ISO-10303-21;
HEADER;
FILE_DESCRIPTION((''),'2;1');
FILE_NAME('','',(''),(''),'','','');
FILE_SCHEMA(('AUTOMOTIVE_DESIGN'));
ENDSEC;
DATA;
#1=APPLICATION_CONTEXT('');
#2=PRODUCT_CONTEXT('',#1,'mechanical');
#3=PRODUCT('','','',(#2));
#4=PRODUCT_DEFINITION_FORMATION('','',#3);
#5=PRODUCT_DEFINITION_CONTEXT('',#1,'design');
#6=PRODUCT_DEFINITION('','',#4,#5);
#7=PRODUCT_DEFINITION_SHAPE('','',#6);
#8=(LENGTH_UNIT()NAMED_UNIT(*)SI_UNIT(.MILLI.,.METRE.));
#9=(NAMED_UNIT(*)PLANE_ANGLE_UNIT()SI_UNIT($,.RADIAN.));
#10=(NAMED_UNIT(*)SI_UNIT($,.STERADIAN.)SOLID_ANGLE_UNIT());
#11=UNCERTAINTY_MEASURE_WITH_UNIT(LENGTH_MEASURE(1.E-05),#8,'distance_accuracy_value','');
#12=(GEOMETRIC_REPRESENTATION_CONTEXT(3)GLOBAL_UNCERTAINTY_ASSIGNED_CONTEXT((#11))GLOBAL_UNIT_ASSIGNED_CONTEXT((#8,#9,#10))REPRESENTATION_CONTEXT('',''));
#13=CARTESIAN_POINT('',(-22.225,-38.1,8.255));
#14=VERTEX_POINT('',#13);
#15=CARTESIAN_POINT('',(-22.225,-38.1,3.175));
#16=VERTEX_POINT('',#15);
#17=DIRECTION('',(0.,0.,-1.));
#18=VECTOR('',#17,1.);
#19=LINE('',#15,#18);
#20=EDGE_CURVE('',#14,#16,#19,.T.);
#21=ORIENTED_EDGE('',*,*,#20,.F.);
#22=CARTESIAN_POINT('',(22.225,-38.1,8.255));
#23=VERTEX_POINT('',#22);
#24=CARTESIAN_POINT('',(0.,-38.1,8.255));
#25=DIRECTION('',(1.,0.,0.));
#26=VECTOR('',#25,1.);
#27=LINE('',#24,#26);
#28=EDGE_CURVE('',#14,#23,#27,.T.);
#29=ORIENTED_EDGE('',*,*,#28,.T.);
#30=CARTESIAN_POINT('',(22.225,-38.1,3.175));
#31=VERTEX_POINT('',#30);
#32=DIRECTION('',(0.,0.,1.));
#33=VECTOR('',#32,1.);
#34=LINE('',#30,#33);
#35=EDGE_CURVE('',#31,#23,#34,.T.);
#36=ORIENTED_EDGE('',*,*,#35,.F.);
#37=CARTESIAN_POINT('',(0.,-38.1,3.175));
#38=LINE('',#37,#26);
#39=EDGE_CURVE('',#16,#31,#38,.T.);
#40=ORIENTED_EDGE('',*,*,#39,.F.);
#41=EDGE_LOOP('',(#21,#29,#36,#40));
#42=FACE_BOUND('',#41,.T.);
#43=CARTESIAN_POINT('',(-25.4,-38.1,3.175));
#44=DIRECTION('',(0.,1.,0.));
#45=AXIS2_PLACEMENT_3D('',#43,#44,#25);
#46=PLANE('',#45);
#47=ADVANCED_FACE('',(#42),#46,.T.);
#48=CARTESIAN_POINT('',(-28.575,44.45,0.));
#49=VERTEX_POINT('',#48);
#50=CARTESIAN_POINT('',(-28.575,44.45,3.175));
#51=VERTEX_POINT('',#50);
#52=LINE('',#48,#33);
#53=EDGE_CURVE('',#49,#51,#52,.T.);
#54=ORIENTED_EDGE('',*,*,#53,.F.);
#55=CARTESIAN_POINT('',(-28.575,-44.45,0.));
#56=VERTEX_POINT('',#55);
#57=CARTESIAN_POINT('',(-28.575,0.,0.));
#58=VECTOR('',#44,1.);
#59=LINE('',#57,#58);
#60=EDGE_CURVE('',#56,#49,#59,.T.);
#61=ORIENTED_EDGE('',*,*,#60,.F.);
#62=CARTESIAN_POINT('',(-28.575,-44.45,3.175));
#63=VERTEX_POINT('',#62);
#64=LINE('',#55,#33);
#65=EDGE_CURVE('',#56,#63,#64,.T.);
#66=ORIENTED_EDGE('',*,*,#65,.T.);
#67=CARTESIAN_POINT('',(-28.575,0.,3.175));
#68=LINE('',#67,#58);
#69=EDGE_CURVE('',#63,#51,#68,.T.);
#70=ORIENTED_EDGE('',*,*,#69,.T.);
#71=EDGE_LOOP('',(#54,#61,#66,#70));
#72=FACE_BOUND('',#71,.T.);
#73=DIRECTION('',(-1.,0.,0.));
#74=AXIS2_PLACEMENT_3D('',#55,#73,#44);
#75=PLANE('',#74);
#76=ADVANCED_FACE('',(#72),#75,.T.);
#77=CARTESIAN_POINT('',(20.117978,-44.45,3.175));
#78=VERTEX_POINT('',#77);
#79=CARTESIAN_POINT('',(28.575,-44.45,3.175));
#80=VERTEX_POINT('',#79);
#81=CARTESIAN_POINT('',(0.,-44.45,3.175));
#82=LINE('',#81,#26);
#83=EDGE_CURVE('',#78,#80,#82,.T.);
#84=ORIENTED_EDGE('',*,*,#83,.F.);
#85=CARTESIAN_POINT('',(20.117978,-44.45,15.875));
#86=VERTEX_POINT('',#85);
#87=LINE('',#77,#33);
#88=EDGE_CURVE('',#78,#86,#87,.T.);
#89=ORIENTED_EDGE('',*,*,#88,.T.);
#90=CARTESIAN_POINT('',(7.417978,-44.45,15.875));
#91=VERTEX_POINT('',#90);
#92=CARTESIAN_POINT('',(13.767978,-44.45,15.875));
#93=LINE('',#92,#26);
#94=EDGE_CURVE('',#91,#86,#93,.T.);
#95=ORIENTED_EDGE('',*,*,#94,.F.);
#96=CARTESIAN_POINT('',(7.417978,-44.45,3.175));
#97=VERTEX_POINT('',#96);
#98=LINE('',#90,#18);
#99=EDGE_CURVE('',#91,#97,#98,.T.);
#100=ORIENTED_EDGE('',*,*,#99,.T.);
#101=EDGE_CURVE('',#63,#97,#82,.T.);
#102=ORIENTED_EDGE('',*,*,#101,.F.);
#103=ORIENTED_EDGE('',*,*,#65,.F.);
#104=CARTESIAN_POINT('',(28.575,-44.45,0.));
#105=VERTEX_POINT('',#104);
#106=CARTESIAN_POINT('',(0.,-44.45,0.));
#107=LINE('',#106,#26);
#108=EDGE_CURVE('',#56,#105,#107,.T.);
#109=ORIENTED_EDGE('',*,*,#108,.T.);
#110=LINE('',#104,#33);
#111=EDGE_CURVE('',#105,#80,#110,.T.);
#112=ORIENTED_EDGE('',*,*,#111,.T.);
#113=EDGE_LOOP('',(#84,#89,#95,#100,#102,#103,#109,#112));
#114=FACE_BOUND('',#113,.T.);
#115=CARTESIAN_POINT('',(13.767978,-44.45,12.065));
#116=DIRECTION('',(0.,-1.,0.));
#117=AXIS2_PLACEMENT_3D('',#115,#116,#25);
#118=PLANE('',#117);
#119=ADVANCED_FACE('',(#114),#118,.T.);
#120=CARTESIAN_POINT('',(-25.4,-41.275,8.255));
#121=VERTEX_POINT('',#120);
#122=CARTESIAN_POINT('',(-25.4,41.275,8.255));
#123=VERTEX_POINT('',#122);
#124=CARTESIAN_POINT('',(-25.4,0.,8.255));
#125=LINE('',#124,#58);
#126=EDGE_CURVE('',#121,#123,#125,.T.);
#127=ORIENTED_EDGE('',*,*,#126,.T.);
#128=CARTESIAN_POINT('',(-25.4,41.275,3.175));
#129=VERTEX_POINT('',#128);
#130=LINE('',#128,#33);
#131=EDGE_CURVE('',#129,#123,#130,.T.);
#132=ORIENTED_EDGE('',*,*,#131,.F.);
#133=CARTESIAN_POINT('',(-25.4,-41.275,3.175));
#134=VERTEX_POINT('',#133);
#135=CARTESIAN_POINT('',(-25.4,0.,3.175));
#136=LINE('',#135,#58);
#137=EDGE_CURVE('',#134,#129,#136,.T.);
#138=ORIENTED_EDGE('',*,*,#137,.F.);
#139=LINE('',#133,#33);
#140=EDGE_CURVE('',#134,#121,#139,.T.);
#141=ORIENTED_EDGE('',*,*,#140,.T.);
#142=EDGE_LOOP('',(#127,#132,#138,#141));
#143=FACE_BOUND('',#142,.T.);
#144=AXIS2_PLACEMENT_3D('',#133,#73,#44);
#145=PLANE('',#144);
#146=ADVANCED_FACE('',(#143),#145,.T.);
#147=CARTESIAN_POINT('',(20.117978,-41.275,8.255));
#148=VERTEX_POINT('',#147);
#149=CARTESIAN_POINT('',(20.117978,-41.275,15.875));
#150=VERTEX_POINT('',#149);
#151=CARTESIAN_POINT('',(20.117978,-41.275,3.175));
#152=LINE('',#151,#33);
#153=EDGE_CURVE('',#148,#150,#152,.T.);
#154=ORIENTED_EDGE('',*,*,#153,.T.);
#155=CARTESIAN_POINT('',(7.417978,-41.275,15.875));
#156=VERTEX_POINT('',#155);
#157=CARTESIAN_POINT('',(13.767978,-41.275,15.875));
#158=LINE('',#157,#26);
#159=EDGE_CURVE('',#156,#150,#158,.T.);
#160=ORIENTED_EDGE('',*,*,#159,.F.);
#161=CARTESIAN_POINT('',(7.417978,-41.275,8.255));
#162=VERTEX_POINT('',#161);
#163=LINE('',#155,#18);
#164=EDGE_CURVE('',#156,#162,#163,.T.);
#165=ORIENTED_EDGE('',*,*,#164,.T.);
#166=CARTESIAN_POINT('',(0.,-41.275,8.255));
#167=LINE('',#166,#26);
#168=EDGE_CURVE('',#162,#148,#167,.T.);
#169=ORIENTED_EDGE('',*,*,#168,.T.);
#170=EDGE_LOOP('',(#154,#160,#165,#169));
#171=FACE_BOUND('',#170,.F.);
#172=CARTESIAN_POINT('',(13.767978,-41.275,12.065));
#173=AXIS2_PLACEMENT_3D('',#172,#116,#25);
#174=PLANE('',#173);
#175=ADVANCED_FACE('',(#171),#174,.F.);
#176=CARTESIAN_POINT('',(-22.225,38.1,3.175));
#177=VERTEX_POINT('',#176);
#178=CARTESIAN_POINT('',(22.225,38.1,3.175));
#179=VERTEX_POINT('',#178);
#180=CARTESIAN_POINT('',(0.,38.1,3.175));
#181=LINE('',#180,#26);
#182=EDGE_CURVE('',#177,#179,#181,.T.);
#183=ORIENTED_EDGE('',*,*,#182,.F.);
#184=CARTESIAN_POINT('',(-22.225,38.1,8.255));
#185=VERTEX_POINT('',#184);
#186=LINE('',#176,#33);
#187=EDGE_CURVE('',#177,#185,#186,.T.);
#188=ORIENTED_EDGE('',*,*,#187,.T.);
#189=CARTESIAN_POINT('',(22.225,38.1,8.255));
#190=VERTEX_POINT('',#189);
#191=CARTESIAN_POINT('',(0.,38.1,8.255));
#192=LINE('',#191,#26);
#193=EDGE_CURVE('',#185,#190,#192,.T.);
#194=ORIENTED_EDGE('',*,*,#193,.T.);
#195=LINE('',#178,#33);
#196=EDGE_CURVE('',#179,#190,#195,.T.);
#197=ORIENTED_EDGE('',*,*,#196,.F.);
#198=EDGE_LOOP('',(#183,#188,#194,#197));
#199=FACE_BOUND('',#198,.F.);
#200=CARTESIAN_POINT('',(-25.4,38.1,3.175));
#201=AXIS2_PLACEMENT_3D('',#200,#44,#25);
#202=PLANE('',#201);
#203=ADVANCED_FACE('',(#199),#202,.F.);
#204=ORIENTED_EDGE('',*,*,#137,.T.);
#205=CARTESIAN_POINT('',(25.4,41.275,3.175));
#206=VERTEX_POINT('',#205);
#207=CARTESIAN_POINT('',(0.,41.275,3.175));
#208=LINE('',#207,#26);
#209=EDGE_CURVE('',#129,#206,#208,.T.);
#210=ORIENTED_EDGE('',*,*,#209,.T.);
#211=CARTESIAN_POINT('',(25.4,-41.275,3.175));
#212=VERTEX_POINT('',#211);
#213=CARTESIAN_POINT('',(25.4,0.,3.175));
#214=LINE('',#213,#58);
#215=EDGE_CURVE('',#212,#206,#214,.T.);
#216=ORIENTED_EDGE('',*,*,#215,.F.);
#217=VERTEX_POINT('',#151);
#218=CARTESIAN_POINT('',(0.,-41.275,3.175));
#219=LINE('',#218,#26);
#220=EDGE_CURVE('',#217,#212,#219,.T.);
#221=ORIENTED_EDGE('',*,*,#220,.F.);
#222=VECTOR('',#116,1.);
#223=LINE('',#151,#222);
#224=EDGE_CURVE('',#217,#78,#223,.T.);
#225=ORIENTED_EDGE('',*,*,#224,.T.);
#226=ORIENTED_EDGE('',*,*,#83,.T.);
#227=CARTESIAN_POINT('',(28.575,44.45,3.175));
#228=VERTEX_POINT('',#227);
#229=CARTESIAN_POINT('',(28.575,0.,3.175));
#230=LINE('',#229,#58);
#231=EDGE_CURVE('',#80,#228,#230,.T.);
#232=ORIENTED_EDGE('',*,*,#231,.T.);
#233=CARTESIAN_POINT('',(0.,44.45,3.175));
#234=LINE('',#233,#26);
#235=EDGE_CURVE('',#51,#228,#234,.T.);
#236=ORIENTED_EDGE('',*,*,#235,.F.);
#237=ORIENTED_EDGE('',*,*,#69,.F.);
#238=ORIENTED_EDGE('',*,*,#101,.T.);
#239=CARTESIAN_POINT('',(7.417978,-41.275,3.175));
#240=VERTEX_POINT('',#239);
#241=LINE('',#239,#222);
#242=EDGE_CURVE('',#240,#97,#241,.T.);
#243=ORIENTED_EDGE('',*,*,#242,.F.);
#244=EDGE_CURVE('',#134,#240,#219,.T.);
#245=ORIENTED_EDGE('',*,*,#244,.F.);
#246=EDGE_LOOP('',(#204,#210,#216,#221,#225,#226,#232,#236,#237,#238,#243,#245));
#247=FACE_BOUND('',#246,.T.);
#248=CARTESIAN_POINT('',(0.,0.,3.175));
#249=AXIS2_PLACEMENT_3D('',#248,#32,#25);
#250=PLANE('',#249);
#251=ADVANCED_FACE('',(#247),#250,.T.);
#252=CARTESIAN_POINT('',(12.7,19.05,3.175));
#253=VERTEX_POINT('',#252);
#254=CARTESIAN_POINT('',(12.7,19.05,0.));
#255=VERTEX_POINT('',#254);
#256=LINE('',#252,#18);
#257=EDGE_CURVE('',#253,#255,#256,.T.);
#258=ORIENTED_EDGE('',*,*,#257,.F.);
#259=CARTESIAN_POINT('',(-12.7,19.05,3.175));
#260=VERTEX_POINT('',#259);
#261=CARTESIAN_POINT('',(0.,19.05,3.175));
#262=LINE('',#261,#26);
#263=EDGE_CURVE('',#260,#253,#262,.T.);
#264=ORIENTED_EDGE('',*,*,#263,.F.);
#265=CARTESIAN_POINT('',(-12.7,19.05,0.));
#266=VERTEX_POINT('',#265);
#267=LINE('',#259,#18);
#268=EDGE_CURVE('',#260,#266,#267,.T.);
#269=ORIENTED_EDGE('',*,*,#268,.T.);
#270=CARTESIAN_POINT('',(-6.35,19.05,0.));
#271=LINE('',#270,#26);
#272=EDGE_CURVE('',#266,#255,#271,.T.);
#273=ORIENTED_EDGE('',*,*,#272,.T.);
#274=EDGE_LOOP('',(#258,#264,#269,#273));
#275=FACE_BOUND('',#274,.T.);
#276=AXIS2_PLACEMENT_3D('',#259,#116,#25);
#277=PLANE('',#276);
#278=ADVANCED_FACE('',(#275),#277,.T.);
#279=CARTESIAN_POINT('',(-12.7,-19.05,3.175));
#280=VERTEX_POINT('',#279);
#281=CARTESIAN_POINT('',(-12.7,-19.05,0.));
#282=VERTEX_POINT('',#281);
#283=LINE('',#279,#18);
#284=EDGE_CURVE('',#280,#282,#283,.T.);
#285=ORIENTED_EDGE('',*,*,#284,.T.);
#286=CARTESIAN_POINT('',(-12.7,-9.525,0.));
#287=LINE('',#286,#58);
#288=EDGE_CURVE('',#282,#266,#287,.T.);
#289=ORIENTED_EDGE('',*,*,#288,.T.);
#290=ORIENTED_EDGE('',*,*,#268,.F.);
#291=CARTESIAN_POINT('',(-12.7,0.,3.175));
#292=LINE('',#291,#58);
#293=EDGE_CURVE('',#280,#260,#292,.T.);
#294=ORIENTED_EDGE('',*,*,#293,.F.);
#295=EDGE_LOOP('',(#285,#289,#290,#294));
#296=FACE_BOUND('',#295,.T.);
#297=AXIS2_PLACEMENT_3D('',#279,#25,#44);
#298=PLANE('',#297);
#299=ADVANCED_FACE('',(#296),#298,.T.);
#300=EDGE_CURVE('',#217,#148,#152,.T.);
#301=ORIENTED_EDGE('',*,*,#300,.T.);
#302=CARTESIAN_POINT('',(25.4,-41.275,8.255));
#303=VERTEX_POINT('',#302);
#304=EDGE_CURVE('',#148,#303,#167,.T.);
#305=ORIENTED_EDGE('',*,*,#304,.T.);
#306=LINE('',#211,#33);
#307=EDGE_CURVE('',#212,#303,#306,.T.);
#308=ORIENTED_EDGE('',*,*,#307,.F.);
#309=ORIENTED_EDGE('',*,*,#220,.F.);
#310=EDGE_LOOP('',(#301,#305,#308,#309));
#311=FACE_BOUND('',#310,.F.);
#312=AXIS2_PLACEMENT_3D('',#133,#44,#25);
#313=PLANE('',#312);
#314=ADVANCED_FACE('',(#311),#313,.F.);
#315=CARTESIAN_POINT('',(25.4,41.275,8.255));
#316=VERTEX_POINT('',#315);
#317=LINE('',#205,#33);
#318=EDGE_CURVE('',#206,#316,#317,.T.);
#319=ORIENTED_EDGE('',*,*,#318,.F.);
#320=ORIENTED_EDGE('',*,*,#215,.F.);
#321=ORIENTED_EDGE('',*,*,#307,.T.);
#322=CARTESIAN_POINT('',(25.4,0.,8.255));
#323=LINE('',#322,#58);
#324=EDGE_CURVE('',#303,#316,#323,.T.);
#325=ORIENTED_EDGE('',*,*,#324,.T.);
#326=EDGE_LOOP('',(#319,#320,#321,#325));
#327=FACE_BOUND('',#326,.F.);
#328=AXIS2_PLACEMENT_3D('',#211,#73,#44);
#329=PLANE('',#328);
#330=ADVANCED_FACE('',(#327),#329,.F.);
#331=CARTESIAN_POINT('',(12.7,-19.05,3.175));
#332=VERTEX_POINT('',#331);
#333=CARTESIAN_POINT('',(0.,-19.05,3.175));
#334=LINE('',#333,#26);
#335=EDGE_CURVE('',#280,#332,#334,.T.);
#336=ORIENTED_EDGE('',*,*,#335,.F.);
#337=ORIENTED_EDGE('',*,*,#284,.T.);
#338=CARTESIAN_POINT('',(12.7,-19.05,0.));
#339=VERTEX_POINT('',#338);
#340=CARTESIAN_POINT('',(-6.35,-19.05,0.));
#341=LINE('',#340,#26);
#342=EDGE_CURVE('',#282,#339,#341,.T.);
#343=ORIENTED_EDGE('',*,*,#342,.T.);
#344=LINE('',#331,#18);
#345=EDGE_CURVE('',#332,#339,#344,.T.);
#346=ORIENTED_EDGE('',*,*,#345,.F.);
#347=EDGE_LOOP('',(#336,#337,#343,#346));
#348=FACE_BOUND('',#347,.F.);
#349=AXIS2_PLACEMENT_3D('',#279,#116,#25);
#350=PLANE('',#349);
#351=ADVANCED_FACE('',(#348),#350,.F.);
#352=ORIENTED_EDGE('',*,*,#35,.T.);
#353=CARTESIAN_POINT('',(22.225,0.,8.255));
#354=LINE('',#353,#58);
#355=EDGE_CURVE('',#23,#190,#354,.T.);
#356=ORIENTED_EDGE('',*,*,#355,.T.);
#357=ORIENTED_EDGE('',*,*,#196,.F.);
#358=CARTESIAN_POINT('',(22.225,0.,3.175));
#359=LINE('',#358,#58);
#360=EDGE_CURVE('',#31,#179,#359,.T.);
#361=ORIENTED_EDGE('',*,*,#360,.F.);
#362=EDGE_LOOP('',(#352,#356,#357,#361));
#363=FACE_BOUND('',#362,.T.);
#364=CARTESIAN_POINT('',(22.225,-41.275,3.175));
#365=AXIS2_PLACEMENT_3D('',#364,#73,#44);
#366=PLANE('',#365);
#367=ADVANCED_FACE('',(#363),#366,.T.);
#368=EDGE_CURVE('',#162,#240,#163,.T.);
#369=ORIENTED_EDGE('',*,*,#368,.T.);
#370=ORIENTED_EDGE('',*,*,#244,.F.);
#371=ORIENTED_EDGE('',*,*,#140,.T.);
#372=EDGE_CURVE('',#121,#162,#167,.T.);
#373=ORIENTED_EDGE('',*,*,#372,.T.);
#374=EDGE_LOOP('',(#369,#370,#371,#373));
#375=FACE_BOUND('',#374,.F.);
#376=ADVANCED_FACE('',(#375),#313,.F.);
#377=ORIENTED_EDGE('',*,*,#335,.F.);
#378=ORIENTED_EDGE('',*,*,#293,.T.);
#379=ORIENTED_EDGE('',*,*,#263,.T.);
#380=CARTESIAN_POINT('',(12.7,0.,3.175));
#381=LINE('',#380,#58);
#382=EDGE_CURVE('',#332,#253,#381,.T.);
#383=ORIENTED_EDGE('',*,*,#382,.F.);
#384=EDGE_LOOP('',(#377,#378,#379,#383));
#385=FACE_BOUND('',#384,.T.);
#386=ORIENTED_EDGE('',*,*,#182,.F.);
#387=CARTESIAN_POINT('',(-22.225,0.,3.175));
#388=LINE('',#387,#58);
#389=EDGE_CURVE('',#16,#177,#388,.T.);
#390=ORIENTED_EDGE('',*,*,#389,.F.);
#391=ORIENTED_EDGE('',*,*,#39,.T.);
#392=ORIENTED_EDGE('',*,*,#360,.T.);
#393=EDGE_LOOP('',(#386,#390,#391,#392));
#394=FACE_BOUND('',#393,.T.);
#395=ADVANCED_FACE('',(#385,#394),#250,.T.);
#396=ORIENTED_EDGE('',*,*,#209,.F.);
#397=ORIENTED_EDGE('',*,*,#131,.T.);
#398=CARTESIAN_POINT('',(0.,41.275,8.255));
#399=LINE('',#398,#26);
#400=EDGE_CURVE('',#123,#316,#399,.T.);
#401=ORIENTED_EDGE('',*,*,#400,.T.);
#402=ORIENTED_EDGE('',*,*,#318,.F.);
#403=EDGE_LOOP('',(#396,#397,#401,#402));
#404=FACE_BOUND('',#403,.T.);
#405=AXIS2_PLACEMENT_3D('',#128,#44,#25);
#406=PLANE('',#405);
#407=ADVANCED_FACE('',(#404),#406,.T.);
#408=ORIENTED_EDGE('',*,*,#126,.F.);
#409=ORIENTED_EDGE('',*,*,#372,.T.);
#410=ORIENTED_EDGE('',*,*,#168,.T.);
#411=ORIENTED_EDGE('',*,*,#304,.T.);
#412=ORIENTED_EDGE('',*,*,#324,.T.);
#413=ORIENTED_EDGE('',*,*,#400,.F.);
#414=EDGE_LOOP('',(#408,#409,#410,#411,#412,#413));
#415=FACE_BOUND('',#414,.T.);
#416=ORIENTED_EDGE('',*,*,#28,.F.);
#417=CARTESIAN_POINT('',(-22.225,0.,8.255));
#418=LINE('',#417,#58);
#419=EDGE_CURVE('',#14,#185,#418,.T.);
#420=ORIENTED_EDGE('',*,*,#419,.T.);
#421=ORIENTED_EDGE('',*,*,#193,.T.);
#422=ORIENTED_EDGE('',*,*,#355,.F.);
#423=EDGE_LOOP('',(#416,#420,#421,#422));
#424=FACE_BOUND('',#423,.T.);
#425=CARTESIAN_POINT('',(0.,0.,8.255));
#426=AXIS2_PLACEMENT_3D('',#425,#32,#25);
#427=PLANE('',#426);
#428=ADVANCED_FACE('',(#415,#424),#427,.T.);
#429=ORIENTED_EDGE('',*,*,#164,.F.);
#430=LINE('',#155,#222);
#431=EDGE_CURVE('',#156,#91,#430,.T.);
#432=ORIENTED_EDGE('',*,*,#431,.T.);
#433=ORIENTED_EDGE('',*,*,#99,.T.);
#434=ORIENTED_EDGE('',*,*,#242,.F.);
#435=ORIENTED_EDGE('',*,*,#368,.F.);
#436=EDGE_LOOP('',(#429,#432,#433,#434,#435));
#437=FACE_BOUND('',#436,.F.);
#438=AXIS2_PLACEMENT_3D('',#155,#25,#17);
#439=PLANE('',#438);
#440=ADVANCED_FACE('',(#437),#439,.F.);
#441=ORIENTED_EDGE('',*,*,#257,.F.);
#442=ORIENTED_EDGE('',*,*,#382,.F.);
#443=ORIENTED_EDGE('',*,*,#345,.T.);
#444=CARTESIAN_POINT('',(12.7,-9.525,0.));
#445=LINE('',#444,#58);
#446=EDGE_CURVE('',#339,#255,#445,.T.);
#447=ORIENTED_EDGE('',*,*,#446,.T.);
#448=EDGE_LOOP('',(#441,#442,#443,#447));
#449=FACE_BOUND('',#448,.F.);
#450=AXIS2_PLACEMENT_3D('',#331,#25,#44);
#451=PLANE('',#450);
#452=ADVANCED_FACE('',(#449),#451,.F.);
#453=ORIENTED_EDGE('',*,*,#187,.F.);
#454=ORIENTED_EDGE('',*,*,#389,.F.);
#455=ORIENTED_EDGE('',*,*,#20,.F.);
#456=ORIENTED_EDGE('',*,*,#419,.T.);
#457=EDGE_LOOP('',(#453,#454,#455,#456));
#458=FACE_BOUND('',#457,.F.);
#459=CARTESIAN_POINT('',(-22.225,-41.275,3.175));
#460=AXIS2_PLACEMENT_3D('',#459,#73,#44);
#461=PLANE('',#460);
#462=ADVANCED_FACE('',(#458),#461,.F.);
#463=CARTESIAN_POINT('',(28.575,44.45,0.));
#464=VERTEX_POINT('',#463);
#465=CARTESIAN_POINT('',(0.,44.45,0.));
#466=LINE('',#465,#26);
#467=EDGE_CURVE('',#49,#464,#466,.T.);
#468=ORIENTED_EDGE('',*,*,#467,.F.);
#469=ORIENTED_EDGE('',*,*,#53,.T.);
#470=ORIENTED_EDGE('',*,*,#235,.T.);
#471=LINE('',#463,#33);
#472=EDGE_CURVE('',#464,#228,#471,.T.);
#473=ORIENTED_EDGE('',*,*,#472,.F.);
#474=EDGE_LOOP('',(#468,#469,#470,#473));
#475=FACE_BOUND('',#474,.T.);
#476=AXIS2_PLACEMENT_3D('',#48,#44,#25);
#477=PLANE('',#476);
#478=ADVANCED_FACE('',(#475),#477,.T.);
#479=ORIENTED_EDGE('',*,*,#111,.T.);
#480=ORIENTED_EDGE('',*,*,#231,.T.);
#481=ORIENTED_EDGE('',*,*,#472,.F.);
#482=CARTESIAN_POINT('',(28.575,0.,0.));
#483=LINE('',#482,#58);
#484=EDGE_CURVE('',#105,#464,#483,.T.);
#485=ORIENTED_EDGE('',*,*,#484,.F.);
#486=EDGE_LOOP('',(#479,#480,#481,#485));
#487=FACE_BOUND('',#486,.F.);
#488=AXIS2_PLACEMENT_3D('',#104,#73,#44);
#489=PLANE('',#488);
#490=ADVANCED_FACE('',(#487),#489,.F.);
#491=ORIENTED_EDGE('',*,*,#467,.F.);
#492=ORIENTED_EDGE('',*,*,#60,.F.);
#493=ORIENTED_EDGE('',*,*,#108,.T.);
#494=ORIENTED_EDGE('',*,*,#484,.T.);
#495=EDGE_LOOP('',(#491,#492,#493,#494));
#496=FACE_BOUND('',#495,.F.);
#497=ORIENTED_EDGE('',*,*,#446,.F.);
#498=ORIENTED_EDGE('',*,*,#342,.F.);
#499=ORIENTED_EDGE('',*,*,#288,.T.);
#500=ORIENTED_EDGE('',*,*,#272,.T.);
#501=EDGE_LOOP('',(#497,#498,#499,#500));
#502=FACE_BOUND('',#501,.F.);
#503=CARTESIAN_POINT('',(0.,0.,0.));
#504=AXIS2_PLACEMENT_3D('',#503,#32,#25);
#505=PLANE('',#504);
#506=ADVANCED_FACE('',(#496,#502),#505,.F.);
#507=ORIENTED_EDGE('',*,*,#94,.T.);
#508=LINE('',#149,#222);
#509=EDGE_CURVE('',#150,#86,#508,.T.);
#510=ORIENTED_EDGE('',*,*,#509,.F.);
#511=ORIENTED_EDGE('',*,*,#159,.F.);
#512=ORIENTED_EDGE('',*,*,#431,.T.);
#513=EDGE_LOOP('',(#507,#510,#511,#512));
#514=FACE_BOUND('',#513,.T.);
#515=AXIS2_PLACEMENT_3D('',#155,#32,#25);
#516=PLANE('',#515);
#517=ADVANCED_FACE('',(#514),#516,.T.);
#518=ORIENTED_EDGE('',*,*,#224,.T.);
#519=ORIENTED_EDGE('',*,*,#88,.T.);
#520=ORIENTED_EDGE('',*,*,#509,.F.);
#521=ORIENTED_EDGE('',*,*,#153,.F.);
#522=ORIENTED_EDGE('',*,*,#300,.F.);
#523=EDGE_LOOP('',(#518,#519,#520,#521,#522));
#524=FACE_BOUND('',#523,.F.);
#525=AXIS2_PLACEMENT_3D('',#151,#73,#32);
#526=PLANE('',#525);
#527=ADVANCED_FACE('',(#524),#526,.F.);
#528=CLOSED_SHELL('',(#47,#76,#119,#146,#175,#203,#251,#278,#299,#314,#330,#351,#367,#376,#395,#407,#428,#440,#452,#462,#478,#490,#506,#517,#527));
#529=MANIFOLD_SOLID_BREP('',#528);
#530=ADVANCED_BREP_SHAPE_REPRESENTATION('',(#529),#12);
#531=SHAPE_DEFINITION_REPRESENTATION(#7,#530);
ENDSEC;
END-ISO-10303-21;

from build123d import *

# Parameters (mm, degrees)
F0_W        = 57.15
F0_H        = 88.9
F1_DEPTH    = 3.175
F2_W        = 50.8
F2_H        = 82.55
F3_DEPTH    = 5.08
F4_T        = 3.175
F4_T3_DEPTH = 57.15
F4_T5_DEPTH = 88.9
F5_W        = 25.4
F5_H        = 38.1
F6_DEPTH    = 25.4
F7_W        = 12.7
F7_H        = 7.62
F7_H_2      = 5.08
F8_DEPTH    = 3.175


# Not quite as in the source:
# - a shell that OpenCascade refuses in one call is made with other operations: the cavity is built on its own and cut out


with BuildPart() as f1:
    # F0 (on Top) → F1 (new body)
    with BuildSketch(Plane.XY):
        Rectangle(F0_W, F0_H)
    extrude(amount=F1_DEPTH)

    # F2 (on face) → F3 (join)
    with BuildSketch(Plane.XY.offset(3.175)):
        Rectangle(F2_W, F2_H)
    extrude(amount=F3_DEPTH)

    # F4: shell of thickness 3.175, made by hand


with BuildPart() as f4_core1:
    # F4_t2: copy of F1
    add(f1.part)

    # the walls: a layer under each face that stays
    f4_faces = [f4_core1.faces().sort_by_distance(p)[0] for p in [
        (0, 44.45, 1.5875),
        (28.575, 0, 1.5875),
        (-28.575, 0, 1.5875),
        (0, 0, 0),
        (-26.67, -41.4866666667, 3.175),
        (0, -44.45, 1.5875),
        (0, 41.275, 5.715),
        (-25.4, 0, 5.715),
        (0, -41.275, 5.715),
        (25.4, 0, 5.715),
    ]]
    thicken(f4_faces, amount=-F4_T, mode=Mode.SUBTRACT)

    # F4_s4 → F4_t3 (cut)
    with BuildSketch(Plane.YZ.offset(-28.575)):
        Polygon((41.30675, 3.20675), (41.275, 0), (38.1, 0), (38.1, 3.175), align=None)
        Polygon((-41.30675, 3.20675), (-41.275, 0), (-38.1, 0), (-38.1, 3.175), align=None)
    extrude(amount=F4_T3_DEPTH, mode=Mode.SUBTRACT)

    # F4_s6 → F4_t5 (cut)
    with BuildSketch(Plane.XZ.offset(-44.45)):
        Polygon((-25.43175, 3.20675), (-25.4, 0), (-22.225, 0), (-22.225, 3.175), align=None)
        Polygon((25.43175, 3.20675), (25.4, 0), (22.225, 0), (22.225, 3.175), align=None)
    extrude(amount=F4_T5_DEPTH, mode=Mode.SUBTRACT)


with BuildPart() as f1_1:
    add(f1.part)

    # what is left inside the walls is the cavity
    f4_cavity = [f4_core1.part.solids().sort_by_distance(p)[0] for p in [
        (0, -12.7, 3.20675),
    ]]
    add(f4_cavity, mode=Mode.SUBTRACT)

    # F5 (on face) → F6 (cut)
    with BuildSketch(Plane.XY.offset(3.175)):
        Rectangle(F5_W, F5_H)
    extrude(amount=-F6_DEPTH, mode=Mode.SUBTRACT)

    # F7 (on face) → F8 (join)
    with BuildSketch(Plane.XZ.offset(41.275)):
        with Locations((13.7679782532, 12.065)):
            Rectangle(F7_W, F7_H)
        with Locations((13.7679782532, 5.715)):
            Rectangle(F7_W, F7_H_2)
    extrude(amount=F8_DEPTH)


solid = f1_1.part
